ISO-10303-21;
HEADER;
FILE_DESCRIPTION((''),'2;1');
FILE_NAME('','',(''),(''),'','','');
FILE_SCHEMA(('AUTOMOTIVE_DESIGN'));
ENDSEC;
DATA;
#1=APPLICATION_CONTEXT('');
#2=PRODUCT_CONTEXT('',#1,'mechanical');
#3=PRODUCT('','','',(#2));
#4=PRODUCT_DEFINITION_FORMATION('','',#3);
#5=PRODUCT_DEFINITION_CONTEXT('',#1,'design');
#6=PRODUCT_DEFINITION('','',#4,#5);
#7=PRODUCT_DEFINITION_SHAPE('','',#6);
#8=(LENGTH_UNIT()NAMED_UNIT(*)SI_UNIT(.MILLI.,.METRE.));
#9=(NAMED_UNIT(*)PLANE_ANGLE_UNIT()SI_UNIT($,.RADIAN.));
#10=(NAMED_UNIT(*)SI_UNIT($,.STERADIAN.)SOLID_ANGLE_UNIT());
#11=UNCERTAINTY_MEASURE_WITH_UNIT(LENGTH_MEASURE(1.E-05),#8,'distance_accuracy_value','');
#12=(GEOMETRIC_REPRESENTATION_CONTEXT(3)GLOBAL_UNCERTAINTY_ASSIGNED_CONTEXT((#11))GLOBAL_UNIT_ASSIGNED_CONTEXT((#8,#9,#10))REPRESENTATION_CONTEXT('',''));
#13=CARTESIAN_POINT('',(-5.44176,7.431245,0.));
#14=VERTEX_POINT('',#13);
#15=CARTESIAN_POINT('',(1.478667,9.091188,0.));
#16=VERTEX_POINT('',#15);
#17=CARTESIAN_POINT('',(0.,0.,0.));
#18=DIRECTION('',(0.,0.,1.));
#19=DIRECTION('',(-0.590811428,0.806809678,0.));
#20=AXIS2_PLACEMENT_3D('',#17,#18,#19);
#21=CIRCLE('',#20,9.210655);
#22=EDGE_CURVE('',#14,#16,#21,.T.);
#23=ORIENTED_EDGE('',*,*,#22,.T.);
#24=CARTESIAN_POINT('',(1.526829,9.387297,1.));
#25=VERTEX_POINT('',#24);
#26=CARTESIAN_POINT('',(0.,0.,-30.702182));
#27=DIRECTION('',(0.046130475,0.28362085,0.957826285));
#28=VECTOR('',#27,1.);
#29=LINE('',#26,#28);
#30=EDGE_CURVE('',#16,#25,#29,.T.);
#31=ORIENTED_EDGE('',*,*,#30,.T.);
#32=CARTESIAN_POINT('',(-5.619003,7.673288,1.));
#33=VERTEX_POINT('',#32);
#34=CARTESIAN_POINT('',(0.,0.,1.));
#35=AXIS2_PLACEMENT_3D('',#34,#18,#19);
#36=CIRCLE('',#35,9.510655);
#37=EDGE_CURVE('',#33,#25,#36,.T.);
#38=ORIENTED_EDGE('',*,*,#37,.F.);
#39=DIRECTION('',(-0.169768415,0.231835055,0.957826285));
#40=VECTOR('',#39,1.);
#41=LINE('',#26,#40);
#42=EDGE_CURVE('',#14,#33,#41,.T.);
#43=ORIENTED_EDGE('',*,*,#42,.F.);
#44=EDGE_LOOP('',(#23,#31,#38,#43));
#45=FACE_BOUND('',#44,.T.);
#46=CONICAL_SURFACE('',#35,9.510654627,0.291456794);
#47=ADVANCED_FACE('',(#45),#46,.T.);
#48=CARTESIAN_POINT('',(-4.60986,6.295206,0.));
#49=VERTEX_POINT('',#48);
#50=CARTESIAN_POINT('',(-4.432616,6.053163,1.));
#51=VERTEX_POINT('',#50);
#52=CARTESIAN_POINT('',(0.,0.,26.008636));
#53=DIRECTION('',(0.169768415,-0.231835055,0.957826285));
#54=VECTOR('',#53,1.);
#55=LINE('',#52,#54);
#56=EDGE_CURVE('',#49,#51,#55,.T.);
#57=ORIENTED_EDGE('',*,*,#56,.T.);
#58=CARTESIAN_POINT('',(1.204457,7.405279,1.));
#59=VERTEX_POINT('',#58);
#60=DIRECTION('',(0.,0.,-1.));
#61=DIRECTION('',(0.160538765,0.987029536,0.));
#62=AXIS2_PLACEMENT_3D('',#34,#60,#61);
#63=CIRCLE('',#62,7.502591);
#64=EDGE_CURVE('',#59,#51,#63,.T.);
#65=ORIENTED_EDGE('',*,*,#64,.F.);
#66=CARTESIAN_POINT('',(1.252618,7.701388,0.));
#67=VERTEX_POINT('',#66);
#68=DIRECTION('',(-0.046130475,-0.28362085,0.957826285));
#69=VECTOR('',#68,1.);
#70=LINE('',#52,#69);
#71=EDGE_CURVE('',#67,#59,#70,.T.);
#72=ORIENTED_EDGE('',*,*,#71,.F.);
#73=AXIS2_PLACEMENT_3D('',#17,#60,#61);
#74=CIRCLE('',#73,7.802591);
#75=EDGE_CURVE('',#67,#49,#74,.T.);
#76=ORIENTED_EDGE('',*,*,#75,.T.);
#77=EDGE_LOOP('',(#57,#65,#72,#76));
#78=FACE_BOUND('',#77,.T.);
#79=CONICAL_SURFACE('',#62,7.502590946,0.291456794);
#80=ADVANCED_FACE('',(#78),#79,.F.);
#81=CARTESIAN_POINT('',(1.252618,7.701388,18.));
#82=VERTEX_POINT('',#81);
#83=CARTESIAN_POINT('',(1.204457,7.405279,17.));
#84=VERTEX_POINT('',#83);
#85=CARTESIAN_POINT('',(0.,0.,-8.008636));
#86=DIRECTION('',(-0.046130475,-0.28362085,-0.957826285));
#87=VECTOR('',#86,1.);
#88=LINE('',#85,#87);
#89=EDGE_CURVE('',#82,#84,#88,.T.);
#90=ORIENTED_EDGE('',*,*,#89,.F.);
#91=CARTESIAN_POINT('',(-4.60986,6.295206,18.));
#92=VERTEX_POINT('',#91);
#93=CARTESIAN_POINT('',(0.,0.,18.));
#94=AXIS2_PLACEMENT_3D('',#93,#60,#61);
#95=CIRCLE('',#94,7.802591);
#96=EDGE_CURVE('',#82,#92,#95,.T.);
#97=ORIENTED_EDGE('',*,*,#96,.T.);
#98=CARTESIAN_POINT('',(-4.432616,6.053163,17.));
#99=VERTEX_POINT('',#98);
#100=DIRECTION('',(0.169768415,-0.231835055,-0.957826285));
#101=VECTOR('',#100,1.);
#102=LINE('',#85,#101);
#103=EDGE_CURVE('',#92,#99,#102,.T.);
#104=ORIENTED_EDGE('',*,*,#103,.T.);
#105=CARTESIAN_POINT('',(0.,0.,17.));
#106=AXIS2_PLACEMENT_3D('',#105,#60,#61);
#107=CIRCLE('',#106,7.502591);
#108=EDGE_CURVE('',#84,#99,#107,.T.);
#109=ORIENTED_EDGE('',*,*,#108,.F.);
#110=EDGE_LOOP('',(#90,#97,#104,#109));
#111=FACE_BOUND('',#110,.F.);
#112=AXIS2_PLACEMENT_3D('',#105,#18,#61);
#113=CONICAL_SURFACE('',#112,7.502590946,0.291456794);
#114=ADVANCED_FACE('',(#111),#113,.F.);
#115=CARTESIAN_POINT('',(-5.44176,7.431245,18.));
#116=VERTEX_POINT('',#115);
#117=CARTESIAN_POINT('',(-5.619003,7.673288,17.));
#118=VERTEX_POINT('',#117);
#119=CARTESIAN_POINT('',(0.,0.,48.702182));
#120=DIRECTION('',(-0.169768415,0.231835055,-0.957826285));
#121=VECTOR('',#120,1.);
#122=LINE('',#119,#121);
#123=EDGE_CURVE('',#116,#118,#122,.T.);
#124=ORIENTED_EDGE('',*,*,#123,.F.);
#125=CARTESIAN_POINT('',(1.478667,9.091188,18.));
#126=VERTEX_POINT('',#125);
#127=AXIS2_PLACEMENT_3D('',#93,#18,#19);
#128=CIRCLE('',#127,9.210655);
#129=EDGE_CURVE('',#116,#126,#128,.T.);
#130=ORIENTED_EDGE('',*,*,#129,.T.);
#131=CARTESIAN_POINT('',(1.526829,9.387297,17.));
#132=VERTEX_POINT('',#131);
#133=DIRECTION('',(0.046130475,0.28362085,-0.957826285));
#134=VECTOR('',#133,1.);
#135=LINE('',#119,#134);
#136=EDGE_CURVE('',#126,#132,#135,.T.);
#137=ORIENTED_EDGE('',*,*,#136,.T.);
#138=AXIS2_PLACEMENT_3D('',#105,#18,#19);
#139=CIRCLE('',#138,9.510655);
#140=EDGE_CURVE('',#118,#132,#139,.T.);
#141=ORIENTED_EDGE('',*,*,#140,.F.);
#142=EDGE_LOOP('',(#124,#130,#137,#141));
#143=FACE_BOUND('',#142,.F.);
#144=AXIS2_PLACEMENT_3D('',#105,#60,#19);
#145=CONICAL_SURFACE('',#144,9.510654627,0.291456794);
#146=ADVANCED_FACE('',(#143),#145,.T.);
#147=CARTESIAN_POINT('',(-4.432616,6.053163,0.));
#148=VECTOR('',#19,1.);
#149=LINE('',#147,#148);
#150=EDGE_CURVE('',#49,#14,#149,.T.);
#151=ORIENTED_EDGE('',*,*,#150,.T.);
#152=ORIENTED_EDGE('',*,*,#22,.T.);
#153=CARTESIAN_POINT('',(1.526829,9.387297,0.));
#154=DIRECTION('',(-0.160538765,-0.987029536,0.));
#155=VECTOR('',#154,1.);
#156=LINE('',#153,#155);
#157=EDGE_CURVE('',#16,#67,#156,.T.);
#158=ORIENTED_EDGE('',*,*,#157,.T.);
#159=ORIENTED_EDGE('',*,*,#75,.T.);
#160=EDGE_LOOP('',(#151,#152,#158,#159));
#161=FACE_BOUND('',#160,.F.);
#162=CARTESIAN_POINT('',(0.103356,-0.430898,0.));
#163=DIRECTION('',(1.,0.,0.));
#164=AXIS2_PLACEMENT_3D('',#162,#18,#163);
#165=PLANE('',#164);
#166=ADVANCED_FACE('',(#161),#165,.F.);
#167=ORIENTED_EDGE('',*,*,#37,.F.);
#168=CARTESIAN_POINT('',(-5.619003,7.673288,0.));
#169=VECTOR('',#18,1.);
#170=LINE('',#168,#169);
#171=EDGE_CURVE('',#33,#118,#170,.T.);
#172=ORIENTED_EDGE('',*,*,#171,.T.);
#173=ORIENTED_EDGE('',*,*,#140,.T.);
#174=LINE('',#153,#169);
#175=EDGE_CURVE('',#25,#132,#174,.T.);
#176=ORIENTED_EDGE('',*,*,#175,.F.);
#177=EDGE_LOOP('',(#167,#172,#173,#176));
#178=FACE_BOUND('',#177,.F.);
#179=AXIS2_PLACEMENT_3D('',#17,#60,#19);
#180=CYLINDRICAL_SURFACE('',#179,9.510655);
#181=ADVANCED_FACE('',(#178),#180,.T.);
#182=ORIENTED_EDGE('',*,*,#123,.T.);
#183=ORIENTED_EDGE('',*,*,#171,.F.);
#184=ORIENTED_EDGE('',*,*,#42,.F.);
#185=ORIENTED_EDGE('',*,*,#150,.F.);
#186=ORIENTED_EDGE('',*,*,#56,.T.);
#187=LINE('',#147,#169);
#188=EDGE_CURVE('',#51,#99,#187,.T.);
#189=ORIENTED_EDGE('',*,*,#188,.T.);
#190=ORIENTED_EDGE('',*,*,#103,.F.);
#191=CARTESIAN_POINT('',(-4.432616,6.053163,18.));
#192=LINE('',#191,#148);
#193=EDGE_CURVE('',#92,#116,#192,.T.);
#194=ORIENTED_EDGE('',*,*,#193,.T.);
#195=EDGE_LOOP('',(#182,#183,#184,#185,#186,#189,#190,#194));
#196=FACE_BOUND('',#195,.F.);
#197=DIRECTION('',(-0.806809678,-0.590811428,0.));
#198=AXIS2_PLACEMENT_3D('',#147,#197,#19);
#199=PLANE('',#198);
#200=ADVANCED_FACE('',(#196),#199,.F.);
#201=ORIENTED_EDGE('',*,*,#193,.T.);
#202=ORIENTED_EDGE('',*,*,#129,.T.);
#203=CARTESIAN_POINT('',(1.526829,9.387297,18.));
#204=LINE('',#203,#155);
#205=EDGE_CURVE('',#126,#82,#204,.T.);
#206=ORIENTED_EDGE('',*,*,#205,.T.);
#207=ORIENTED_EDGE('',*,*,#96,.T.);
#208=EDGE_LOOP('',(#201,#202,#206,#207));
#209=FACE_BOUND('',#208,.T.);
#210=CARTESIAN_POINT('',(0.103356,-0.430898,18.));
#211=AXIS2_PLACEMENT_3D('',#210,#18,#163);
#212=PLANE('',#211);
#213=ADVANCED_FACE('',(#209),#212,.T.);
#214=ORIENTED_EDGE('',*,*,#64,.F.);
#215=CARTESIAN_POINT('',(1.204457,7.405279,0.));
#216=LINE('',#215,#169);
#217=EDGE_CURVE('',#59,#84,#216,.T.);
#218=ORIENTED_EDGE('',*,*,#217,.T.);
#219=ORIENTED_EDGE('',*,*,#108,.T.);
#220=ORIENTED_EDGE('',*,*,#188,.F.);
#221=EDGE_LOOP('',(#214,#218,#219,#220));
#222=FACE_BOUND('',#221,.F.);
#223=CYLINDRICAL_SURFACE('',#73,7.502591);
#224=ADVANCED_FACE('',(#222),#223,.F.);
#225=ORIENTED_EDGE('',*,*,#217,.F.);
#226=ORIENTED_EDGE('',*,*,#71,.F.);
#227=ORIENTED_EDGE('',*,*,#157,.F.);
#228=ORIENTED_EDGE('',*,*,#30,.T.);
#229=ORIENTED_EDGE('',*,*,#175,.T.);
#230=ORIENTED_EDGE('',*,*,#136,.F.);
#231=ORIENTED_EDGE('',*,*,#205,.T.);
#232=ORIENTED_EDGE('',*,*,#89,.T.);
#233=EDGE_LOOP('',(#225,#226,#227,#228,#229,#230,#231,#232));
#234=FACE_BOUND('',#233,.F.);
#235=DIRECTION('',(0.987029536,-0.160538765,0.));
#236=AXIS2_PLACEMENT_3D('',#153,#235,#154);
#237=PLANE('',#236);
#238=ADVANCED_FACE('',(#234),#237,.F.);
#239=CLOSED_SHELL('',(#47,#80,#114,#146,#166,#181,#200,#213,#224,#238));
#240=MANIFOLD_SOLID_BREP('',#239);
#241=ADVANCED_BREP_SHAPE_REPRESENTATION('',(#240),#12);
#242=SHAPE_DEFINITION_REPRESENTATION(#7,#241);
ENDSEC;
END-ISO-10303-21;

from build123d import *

# Parameters (mm, degrees)
F1_DEPTH   = 18
F2_SIZE2   = 1
F2_SIZE    = 0.3
F2_2_SIZE2 = 1
F2_2_SIZE  = 0.3


# Not quite as in the source:
# - a feature names something its author has since deleted; it is built from what else it names


with BuildPart() as f1:
    # F0 (on Top) → F1 (new body)
    with BuildSketch(Plane.XY):
        with BuildLine():
            ThreePointArc((1.2044566856, 7.40527886), (1.7499452086, -7.2956536834), (-4.4326164701, 6.0531629856))
            Line((-4.4326164701, 6.0531629856), (-5.6190034408, 7.6732881976))
            ThreePointArc((-5.6190034408, 7.6732881976), (2.2183169274, -9.2483307381), (1.5268287492, 9.3872970232))
            Line((1.5268287492, 9.3872970232), (1.2044566856, 7.40527886))
        make_face()
    extrude(amount=F1_DEPTH)

    # F2
    f2_edges = [f1.edges().sort_by_distance(p)[0] for p in [
        (2.218317, -9.248331, 18),
        (1.749945, -7.295654, 18),
    ]]
    f2_side = f1.faces().sort_by_distance((1.630296, 8.353243, 18))[0]
    chamfer(f2_edges, length=F2_SIZE, length2=F2_SIZE2, reference=f2_side)

    # F2#2
    f2_2_edges = [f1.edges().sort_by_distance(p)[0] for p in [
        (2.218317, -9.248331, 0),
        (1.749945, -7.295654, 0),
    ]]
    f2_2_side = f1.faces().sort_by_distance((1.630296, 8.353243, 0))[0]
    chamfer(f2_2_edges, length=F2_2_SIZE, length2=F2_2_SIZE2, reference=f2_2_side)


solid = f1.part
